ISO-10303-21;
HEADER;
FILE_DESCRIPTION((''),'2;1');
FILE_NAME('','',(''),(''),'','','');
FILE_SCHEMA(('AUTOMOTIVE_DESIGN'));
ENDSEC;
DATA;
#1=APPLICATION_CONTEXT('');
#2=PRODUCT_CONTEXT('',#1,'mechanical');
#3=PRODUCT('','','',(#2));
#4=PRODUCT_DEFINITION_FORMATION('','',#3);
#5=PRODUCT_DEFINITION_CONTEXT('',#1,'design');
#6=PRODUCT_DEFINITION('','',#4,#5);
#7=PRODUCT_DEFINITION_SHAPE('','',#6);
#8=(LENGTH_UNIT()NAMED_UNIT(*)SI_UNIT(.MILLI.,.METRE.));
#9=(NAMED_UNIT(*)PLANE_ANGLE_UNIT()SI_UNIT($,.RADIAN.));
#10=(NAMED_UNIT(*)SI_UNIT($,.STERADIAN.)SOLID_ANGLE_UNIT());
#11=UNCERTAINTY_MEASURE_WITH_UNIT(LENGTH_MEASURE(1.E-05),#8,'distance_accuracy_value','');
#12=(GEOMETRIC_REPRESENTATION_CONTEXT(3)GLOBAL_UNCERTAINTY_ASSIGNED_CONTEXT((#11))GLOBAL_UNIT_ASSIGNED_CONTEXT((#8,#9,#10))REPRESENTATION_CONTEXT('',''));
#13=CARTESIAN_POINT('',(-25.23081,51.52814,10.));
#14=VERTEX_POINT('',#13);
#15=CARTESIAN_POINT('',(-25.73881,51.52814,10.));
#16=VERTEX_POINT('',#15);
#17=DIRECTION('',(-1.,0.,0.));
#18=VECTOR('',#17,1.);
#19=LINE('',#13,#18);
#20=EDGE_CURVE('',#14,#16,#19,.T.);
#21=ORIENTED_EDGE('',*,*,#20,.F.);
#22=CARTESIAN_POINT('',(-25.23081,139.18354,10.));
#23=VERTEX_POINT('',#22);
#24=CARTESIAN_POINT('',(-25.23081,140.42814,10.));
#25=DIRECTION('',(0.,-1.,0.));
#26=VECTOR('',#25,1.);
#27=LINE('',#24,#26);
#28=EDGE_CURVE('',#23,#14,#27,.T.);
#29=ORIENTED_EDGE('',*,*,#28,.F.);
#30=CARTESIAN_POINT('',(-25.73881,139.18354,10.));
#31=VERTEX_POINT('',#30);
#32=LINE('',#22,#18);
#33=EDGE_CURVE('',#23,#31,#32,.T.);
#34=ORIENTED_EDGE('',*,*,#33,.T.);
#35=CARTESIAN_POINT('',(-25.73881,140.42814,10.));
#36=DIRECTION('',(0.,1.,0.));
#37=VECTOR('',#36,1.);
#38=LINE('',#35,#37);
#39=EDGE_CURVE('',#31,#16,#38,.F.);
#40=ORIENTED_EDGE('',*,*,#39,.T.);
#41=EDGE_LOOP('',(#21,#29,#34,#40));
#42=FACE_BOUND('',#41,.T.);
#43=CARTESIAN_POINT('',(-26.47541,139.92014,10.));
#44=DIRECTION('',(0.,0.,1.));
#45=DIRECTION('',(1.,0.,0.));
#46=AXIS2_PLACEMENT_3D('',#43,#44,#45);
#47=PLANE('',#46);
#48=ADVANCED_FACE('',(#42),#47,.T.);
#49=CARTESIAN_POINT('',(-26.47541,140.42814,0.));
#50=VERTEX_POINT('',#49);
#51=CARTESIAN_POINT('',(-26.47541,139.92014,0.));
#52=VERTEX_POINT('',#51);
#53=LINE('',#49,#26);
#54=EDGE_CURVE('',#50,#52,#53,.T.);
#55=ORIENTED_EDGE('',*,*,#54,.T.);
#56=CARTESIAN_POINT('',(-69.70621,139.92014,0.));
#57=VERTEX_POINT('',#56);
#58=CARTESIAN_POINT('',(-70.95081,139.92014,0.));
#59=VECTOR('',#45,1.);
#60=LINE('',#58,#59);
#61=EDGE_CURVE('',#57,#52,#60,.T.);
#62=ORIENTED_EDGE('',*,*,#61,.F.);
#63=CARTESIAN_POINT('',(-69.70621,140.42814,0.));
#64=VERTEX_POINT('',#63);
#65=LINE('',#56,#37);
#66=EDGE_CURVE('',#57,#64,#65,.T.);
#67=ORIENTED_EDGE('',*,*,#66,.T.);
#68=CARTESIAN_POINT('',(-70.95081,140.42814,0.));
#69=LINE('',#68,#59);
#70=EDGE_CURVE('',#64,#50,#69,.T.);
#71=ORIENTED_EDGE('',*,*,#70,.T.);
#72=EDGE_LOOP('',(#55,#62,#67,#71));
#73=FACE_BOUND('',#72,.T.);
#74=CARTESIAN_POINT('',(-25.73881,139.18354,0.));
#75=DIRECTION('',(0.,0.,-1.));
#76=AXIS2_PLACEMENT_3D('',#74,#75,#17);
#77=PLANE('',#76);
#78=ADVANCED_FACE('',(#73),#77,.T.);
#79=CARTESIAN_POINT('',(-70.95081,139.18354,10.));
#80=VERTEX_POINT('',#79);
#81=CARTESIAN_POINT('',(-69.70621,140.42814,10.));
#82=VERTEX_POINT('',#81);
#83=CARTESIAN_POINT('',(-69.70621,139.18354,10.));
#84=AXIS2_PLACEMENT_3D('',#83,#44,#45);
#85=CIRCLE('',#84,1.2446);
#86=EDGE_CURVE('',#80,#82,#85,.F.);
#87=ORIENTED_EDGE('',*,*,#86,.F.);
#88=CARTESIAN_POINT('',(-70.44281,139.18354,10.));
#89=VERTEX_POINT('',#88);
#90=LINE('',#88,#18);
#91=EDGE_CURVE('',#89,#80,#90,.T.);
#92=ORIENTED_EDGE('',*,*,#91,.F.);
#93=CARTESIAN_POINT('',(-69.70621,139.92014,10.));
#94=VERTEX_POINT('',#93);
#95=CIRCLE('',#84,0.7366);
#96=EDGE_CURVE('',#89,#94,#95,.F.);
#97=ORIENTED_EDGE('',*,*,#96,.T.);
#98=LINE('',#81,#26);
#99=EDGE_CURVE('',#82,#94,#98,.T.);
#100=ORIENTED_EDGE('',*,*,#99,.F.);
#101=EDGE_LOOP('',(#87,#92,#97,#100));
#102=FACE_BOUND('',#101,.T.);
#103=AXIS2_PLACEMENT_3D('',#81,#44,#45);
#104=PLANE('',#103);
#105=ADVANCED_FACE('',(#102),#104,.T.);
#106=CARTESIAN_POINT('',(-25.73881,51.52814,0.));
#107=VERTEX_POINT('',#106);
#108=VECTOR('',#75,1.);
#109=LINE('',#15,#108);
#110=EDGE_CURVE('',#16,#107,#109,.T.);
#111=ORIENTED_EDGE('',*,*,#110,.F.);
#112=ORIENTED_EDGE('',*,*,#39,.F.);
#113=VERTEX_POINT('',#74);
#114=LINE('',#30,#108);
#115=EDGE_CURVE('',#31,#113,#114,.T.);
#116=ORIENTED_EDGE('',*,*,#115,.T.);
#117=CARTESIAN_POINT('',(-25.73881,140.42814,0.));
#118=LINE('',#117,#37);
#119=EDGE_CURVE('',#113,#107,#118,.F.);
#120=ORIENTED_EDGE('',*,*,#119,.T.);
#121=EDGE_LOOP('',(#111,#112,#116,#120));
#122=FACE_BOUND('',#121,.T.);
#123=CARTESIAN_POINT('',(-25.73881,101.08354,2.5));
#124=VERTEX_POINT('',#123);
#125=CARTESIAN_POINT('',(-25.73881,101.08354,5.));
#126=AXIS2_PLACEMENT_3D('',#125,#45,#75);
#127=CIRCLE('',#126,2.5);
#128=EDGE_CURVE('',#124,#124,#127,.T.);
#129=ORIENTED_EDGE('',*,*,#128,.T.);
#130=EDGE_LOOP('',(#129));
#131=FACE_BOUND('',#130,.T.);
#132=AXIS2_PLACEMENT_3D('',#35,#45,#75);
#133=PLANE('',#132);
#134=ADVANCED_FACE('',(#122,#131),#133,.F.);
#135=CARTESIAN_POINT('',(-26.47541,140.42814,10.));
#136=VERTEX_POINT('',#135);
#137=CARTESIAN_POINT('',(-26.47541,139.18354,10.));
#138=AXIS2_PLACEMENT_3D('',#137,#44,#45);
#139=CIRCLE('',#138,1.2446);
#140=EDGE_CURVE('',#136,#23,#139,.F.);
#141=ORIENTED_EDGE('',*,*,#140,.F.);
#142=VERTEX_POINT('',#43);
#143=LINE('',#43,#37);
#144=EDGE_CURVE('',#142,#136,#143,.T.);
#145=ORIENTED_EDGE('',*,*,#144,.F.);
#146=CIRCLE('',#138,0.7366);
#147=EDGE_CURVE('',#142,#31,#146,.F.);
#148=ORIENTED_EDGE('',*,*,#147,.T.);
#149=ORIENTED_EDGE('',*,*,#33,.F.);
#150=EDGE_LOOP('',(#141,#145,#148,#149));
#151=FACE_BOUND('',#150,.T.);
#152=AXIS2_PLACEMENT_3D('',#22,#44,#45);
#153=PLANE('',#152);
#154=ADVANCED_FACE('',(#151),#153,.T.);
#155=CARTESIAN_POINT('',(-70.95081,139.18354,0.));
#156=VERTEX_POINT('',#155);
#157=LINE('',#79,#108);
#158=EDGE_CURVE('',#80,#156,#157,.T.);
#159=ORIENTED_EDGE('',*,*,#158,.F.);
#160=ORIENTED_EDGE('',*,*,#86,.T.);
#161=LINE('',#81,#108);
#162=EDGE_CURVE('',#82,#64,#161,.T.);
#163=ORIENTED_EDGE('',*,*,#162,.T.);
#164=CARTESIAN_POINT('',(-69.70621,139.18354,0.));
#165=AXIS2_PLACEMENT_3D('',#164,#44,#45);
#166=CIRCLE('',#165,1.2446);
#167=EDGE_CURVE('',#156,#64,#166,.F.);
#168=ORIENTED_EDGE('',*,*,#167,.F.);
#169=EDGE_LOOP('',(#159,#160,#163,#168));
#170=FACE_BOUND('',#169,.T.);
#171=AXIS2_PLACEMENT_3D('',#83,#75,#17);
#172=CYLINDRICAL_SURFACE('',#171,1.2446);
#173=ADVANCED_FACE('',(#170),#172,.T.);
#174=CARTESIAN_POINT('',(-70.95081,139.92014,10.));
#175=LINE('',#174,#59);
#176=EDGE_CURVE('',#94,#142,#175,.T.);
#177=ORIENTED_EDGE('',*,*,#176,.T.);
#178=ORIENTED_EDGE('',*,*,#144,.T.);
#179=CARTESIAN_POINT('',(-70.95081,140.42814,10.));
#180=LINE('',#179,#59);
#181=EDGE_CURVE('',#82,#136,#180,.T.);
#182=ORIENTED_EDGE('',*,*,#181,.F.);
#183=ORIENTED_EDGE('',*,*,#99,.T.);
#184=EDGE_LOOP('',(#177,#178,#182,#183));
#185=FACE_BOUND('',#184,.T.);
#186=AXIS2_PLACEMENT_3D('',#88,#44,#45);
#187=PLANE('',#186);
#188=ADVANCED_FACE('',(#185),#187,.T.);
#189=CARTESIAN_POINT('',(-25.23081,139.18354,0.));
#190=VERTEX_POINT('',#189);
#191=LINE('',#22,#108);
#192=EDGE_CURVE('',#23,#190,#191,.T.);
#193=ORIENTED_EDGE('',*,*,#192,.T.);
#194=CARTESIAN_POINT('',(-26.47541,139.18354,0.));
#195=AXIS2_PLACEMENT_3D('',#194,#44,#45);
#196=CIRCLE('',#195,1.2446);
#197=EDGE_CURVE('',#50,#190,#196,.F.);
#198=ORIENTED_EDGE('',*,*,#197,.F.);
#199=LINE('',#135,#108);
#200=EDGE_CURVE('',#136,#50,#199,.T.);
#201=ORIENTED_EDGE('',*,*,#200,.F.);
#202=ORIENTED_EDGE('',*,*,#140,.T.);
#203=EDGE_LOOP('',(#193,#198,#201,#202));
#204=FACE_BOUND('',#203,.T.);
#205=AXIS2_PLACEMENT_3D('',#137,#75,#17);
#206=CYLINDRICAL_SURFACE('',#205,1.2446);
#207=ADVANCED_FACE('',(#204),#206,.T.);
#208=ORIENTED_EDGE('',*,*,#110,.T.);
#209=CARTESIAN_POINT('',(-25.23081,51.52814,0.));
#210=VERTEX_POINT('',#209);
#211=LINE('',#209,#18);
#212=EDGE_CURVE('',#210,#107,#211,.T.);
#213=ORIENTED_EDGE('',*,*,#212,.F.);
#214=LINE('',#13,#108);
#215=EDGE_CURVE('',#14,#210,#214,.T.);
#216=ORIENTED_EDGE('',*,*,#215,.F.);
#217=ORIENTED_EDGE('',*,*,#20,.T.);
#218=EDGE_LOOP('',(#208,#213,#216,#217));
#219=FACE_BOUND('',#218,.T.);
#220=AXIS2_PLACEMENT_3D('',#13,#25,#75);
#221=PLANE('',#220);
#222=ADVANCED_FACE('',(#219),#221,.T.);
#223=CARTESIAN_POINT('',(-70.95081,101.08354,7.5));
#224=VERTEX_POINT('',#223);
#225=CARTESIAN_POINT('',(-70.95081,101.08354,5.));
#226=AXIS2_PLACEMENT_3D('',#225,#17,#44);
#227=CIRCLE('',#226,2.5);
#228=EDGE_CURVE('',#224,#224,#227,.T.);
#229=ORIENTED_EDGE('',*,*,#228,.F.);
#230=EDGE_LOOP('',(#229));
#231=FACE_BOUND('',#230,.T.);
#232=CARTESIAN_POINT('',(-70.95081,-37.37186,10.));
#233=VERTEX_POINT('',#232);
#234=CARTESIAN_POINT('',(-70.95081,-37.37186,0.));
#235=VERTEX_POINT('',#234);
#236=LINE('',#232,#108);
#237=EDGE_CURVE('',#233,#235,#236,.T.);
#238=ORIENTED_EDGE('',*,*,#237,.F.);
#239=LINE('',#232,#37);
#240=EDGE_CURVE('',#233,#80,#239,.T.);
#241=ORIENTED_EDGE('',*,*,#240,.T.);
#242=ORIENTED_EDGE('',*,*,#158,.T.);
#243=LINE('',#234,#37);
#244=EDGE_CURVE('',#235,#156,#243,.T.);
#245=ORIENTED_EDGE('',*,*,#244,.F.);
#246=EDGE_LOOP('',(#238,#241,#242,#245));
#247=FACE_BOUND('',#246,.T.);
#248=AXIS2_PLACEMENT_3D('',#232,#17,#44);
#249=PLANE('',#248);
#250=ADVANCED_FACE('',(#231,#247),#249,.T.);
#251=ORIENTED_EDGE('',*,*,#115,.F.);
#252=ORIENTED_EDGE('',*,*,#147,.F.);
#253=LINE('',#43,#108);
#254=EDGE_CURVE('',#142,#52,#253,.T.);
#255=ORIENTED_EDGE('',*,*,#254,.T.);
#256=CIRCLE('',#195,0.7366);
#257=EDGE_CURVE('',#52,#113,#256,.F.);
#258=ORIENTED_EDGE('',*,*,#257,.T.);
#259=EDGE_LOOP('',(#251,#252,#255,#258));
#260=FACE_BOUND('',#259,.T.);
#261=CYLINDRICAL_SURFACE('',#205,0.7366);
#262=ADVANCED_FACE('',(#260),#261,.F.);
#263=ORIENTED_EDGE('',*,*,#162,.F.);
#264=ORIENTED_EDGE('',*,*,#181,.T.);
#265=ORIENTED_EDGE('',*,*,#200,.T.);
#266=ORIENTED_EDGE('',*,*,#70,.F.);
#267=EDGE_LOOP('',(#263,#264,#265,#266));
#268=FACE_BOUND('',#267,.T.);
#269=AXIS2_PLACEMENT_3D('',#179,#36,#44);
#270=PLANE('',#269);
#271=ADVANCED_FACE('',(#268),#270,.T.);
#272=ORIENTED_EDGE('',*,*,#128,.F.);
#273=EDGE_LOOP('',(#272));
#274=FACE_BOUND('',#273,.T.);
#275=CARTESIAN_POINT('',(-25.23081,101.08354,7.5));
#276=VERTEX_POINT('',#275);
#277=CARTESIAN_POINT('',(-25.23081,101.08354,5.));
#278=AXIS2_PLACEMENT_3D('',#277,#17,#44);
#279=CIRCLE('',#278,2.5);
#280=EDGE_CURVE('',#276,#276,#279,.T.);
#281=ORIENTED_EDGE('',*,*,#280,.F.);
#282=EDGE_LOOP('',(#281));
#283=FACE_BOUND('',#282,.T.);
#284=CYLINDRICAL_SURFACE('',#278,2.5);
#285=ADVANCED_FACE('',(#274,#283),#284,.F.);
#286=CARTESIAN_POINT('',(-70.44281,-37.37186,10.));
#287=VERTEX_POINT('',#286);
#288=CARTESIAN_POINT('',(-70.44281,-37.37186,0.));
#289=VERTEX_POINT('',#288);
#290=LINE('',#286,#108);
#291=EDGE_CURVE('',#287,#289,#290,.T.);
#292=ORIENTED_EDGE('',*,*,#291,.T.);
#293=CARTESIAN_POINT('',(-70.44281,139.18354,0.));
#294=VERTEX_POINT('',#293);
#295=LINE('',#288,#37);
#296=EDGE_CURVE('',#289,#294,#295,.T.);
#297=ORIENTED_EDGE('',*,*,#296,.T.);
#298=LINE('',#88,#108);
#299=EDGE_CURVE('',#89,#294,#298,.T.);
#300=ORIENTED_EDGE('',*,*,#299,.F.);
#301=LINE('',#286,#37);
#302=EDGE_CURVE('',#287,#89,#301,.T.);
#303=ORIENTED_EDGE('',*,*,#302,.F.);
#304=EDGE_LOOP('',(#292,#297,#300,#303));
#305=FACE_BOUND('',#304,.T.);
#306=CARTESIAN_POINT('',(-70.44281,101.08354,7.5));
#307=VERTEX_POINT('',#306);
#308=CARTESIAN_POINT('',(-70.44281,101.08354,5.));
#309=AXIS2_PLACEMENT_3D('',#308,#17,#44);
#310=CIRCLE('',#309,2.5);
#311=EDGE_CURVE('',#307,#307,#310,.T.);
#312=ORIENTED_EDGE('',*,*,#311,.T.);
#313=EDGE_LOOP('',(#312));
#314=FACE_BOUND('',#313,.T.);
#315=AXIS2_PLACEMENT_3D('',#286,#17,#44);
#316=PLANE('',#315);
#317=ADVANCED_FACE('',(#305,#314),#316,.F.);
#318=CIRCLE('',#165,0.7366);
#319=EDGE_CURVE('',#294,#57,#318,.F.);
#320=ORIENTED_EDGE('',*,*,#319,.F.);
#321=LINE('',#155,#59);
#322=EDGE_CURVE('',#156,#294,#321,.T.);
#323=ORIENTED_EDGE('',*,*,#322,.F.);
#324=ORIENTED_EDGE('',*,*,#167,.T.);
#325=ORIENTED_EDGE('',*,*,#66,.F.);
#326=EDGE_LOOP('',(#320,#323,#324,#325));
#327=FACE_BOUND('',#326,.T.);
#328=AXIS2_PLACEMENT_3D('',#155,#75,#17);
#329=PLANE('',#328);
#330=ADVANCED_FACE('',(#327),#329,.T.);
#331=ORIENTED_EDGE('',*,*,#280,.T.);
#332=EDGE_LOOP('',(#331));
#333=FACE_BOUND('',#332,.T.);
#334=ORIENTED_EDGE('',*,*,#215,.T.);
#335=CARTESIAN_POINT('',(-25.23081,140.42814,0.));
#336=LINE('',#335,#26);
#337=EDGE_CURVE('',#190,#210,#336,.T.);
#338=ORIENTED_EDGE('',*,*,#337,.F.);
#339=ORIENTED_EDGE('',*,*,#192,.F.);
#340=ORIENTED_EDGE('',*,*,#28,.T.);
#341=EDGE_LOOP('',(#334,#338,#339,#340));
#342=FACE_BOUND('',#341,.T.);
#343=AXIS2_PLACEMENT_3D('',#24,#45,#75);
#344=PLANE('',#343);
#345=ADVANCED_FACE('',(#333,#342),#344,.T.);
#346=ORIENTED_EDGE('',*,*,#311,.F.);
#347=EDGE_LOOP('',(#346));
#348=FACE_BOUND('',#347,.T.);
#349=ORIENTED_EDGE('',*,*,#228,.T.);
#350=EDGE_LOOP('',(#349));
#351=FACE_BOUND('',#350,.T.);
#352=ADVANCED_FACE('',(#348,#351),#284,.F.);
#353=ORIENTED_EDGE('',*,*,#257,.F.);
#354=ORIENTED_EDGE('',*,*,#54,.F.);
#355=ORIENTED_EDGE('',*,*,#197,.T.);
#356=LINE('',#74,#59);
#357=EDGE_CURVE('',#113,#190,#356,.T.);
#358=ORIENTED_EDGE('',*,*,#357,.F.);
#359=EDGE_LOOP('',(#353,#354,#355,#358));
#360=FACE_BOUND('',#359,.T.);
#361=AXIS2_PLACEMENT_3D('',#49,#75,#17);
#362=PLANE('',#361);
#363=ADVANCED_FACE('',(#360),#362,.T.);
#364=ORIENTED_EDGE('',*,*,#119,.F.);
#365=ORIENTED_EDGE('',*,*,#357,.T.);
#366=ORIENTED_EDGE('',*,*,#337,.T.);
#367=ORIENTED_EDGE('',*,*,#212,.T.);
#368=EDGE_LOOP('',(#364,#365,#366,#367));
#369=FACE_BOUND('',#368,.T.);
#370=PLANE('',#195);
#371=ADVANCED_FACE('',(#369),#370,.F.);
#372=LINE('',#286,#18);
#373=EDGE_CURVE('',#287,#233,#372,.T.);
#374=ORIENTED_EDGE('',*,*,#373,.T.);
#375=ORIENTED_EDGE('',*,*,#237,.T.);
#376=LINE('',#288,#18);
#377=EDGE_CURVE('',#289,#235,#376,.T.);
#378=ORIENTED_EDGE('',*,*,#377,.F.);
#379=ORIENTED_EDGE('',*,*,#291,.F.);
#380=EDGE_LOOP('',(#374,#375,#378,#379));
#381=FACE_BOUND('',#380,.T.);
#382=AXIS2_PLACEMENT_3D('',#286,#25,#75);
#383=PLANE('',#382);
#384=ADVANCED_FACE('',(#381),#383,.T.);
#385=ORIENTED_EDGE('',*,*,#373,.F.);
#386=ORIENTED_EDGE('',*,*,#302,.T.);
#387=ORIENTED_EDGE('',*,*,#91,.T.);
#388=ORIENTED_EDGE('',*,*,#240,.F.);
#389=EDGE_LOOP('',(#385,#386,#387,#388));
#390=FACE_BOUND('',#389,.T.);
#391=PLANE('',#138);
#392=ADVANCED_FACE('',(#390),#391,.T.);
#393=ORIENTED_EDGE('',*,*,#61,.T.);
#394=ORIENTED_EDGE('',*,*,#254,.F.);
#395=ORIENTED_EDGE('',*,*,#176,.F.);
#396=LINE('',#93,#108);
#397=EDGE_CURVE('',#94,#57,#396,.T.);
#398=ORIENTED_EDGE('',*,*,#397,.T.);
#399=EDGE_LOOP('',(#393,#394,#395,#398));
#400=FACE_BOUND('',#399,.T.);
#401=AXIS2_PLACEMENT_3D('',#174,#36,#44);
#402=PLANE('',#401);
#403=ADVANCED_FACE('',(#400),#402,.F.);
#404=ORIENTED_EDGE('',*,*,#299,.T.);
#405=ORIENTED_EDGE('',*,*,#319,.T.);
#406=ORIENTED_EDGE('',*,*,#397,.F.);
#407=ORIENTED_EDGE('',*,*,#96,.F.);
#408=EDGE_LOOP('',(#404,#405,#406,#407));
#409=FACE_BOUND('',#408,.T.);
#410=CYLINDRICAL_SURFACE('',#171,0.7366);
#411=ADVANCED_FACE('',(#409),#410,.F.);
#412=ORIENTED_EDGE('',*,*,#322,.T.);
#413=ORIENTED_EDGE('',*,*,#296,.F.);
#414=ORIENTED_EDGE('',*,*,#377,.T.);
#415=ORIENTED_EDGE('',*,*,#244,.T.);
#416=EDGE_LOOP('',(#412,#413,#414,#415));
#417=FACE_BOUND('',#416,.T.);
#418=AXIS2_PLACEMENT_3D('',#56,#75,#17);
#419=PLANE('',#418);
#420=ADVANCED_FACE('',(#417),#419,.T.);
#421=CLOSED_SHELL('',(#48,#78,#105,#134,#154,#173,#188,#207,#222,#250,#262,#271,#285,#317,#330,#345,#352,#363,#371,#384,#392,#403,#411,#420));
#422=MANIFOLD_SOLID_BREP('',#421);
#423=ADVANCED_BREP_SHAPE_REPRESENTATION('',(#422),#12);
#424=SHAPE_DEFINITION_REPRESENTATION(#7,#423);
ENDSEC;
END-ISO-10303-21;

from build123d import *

# Parameters (mm, degrees)
BASE_FLANGE3_DEPTH = 10
SKETCH15_R         = 2.5
CUT_EXTRUDE1_DEPTH = 45.72


# Sheet-metal steps are written as plain solids
with BuildPart() as part:
    # Sketch12 → Base-Flange3 (new body)
    with BuildSketch(Plane.XY):
        with BuildLine():
            Line((-70.950809652, -37.371859757), (-70.950809652, 139.183540243))
            ThreePointArc((-70.950809652, 139.183540243), (-70.586274752, 140.063605343), (-69.706209652, 140.428140243))
            Line((-69.706209652, 140.428140243), (-26.475409652, 140.428140243))
            ThreePointArc((-26.475409652, 140.428140243), (-25.595344552, 140.063605343), (-25.230809652, 139.183540243))
            Line((-25.230809652, 139.183540243), (-25.230809652, 51.528140243))
            Line((-25.230809652, 51.528140243), (-25.738809652, 51.528140243))
            Line((-25.738809652, 51.528140243), (-25.738809652, 139.183540243))
            ThreePointArc((-25.738809652, 139.183540243), (-25.954554797, 139.704395098), (-26.475409652, 139.920140243))
            Line((-26.475409652, 139.920140243), (-69.706209652, 139.920140243))
            ThreePointArc((-69.706209652, 139.920140243), (-70.227064507, 139.704395098), (-70.442809652, 139.183540243))
            Line((-70.442809652, 139.183540243), (-70.442809652, -37.371859757))
            Line((-70.442809652, -37.371859757), (-70.950809652, -37.371859757))
        make_face()
    extrude(amount=BASE_FLANGE3_DEPTH)

    # Sketch15 → Cut-Extrude1 (cut)
    with BuildSketch(Plane.ZY.offset(70.950809652)):
        with Locations((5, 101.083540243)):
            Circle(SKETCH15_R)
    extrude(amount=-CUT_EXTRUDE1_DEPTH, mode=Mode.SUBTRACT)


solid = part.part
